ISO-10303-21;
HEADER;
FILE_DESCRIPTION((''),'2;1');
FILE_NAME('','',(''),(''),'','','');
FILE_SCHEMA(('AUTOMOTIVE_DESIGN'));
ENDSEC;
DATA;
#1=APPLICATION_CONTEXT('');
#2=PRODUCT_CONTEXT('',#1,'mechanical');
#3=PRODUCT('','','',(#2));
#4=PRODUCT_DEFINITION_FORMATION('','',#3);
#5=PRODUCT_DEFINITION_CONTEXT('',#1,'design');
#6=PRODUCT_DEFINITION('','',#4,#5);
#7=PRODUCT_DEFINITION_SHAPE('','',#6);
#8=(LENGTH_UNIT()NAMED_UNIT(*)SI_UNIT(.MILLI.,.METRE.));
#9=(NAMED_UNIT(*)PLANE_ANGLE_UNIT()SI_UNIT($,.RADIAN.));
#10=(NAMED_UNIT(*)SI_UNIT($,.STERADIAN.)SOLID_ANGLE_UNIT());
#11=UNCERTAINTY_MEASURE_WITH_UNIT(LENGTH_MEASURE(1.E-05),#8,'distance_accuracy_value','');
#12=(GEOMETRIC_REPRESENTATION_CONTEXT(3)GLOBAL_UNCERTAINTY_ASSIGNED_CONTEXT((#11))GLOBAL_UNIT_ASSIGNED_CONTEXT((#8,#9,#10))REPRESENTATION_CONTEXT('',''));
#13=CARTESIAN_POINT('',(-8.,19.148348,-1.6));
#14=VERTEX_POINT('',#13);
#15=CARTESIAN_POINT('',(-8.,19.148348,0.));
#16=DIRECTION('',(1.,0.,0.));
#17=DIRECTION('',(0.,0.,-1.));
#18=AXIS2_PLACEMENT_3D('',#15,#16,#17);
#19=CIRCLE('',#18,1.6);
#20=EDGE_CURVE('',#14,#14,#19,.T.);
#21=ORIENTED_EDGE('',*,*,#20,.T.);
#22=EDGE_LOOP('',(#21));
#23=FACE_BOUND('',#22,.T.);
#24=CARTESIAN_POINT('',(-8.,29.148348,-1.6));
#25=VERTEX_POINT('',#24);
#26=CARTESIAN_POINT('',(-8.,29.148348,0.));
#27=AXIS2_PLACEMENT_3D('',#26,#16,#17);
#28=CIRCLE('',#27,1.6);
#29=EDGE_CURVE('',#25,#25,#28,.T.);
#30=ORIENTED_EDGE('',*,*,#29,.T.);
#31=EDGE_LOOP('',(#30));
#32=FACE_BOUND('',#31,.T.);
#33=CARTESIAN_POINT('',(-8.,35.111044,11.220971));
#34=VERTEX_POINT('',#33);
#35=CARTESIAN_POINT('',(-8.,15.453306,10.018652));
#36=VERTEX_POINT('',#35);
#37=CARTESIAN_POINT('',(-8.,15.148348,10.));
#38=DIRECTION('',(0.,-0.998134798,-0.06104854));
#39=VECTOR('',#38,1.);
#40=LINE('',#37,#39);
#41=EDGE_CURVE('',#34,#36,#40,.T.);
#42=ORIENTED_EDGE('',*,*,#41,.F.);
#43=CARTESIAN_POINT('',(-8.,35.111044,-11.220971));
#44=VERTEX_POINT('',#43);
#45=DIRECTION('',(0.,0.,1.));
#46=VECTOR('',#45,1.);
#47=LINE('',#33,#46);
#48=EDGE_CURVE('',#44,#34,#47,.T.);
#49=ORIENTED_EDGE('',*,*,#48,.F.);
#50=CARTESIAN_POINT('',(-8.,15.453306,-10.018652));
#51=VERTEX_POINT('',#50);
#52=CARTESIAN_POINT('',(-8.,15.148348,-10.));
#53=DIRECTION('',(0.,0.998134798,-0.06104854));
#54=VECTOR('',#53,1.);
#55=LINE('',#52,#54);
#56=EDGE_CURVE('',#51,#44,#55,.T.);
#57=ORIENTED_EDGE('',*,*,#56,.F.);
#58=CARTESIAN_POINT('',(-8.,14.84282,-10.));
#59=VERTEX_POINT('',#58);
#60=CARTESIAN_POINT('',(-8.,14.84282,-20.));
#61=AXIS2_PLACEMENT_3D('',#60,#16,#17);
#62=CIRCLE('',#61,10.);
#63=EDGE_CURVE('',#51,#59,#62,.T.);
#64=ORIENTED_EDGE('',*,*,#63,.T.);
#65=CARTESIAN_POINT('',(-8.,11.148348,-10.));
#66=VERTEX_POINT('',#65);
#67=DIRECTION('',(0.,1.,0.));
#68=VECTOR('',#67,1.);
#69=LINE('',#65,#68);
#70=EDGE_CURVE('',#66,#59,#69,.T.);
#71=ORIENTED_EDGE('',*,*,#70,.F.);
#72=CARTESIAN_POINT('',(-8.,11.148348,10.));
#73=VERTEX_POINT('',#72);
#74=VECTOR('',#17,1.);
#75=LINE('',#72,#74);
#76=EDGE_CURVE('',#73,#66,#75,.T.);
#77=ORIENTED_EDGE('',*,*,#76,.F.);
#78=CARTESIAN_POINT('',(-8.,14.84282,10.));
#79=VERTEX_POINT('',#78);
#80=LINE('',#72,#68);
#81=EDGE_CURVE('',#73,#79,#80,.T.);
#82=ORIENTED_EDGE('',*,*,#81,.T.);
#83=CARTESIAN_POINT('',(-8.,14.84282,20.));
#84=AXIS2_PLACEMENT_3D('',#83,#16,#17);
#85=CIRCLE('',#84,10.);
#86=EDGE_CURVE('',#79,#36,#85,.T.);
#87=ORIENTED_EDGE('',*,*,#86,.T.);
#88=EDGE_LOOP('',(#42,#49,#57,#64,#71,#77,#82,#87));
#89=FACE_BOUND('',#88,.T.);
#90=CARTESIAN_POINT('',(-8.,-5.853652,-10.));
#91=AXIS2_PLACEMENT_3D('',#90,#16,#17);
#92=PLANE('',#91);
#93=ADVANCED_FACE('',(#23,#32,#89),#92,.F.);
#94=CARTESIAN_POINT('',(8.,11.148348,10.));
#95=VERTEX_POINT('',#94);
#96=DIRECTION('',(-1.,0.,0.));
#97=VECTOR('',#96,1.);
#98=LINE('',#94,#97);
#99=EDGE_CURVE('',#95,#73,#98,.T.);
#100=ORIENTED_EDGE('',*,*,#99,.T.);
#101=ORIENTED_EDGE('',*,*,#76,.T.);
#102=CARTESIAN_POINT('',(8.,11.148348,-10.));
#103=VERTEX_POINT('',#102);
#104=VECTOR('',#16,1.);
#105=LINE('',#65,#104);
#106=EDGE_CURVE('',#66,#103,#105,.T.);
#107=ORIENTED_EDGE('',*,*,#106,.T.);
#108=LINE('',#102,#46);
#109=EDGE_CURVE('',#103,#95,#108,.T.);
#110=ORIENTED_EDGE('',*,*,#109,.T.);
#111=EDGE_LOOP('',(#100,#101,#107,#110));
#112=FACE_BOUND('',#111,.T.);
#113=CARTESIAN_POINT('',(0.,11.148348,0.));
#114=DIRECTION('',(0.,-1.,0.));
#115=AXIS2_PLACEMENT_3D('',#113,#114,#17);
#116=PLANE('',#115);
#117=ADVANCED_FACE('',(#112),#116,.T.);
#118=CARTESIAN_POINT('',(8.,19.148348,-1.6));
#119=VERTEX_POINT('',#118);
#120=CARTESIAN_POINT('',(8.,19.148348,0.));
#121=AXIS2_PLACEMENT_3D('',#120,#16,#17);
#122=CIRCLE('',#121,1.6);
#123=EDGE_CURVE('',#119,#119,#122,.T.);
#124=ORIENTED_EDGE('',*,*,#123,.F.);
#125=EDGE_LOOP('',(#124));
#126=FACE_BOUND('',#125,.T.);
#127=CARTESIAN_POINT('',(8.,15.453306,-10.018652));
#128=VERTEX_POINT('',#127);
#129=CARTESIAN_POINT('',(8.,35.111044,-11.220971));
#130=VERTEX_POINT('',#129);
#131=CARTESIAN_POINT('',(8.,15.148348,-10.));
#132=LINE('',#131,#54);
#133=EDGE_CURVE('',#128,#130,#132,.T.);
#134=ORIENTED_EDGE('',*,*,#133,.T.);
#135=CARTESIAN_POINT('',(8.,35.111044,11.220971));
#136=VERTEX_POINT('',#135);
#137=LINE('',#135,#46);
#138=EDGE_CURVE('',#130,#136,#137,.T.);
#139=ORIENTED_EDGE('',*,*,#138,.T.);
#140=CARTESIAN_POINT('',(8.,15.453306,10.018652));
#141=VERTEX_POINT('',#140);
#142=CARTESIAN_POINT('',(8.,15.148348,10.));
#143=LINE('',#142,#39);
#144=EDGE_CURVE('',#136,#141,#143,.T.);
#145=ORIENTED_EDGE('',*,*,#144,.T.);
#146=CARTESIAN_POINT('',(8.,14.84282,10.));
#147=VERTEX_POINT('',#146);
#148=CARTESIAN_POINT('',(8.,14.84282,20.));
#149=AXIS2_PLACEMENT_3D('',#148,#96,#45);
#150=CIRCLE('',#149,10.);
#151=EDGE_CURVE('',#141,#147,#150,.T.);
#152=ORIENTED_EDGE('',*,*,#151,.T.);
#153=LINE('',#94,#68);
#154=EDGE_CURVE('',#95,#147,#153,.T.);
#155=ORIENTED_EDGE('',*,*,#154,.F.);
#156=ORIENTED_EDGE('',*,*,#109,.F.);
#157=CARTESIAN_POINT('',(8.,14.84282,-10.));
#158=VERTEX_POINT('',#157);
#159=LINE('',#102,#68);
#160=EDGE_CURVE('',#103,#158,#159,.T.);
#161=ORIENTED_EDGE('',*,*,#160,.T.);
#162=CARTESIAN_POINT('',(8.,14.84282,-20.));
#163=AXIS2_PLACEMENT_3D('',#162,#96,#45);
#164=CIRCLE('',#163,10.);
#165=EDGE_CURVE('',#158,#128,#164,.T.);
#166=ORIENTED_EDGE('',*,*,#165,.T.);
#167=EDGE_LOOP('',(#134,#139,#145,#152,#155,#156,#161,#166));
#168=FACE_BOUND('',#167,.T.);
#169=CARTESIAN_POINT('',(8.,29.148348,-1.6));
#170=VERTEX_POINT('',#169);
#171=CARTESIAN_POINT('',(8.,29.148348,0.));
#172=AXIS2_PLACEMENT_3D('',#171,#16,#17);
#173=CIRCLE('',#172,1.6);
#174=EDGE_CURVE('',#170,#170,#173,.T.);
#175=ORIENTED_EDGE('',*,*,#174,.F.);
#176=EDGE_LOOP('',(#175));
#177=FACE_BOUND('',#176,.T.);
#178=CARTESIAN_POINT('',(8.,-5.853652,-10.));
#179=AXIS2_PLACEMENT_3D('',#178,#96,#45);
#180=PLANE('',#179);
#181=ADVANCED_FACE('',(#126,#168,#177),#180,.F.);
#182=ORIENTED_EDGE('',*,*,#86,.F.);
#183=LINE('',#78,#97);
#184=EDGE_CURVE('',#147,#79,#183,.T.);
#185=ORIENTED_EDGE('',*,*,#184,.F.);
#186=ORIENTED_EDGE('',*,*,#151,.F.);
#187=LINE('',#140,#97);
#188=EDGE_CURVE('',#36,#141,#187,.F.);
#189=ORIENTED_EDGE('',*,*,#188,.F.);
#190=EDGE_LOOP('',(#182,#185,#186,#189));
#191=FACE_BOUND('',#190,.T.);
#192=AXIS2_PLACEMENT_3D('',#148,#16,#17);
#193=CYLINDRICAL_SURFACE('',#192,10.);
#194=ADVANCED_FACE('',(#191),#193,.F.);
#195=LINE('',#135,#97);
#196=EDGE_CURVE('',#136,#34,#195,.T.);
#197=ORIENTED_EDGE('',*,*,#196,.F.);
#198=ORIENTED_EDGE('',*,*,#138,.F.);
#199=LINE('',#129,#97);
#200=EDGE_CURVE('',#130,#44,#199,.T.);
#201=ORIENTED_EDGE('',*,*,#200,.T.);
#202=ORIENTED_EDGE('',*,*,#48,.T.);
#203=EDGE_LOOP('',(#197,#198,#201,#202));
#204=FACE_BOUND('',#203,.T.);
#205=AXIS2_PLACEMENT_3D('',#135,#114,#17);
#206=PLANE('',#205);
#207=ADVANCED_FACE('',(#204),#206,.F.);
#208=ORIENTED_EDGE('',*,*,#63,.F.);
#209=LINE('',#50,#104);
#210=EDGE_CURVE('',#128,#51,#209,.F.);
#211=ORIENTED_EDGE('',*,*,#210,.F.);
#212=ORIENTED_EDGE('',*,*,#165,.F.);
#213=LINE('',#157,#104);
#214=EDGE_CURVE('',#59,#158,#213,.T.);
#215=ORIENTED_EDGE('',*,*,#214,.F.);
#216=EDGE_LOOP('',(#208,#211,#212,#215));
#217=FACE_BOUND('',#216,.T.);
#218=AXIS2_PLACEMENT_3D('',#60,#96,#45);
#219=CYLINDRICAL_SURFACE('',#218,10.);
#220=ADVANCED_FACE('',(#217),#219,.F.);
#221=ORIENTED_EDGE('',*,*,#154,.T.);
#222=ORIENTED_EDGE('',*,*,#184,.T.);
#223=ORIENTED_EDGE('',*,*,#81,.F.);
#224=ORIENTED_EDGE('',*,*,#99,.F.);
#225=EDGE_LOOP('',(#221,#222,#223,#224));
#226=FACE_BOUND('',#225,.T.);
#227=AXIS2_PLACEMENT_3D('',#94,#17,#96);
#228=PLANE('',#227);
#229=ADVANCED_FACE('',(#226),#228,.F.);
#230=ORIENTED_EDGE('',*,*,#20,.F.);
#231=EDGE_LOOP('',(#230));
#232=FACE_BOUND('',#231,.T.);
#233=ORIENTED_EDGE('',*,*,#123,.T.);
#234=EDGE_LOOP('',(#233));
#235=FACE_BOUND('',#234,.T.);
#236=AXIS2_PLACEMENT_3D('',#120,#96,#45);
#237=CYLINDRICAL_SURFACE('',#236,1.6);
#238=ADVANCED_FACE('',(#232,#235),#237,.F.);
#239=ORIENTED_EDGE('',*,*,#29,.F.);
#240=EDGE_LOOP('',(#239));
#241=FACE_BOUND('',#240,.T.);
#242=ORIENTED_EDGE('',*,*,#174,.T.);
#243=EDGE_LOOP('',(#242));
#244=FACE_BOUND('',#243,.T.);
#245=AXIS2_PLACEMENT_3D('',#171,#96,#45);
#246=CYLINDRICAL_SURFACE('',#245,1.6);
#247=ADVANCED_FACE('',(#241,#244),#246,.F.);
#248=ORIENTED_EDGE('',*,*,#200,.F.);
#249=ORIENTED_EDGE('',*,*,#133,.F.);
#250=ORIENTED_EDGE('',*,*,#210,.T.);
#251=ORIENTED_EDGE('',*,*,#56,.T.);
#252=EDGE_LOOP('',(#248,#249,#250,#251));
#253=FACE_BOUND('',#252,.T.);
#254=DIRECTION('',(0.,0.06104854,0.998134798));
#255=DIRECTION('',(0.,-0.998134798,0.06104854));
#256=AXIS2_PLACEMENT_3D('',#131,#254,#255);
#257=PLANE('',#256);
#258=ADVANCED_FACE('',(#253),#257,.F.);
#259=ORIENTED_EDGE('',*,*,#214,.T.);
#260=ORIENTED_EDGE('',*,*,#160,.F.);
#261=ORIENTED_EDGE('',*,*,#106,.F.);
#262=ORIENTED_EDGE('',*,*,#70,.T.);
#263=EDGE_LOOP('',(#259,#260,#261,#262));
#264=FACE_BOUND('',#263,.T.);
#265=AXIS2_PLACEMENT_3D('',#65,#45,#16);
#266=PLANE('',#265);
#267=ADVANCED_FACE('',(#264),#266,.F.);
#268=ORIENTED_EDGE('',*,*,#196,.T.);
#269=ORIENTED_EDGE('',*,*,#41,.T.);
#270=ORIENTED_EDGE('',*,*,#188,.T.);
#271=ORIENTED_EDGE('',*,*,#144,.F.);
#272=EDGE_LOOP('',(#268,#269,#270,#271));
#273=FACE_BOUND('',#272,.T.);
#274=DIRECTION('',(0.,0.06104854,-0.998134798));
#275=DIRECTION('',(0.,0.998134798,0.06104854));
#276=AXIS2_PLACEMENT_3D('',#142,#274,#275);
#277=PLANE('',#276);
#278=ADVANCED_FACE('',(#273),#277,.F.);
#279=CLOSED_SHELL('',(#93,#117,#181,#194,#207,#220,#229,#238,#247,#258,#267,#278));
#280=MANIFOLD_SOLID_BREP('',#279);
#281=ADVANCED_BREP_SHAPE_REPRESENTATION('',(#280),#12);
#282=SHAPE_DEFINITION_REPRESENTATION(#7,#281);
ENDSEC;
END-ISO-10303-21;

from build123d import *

# Parameters (mm, degrees)
EXTRUDE_1_REACH          = 32.84
EXTRUDE_1_END_RADIUS     = 17
SKETCH_4_W               = 16
SKETCH_4_H               = 20
SKETCH_7_R               = 1.6
EXTRUDE_2_DEPTH          = 8
FILLET_1_R               = 2
CUT_EXTRUDE_1_DEPTH      = 10
CUT_EXTRUDE_1_DEPTH_BACK = 28
SKETCH_9_W               = 16
SKETCH_9_H               = 20
EXTRUDE_3_DEPTH          = 4
FILLET_2_R               = 10


with BuildPart() as part:
    # 草图1 → 旋转1 (revolve)
    with BuildSketch(Plane.XY):
        with BuildLine():
            Line((0, 8.148347953), (0, 15.148347953))
            ThreePointArc((0, 15.148347953), (-9.649034823, 12.144637711), (-15.888316149, 4.194951128))
            ThreePointArc((-15.888316149, 4.194951128), (-15.414532258, 2.711018861), (-13.862245394, 2.841140494))
            ThreePointArc((-13.862245394, 2.841140494), (-8.835262424, 6.313648333), (-3, 8.124333536))
            Line((-3, 8.124333536), (-3, -5.851652047))
            Line((-3, -5.851652047), (0, -5.851652047))
            Line((0, -5.851652047), (0, 8.148347953))
        make_face()
    revolve(axis=Axis((0, 30.990444744, 0), (0, -1, 0)))

    # 凸台-拉伸1: up to this sphere (the profile starts outside it)
    extrude_1_end = Location((0, -1.851652047, 0)) * Sphere(EXTRUDE_1_END_RADIUS, mode=Mode.PRIVATE)
    # 草图4 → 凸台-拉伸1 (add, up to the surface)
    with BuildSketch(Plane(origin=(0, 15.148347953, 0), x_dir=(-1, 0, 0), z_dir=(0, -1, 0)), mode=Mode.PRIVATE) as extrude_1_sk1:
        Rectangle(SKETCH_4_W, SKETCH_4_H)
    extrude_1_tool1 = extrude(extrude_1_sk1.sketch, amount=EXTRUDE_1_REACH, mode=Mode.PRIVATE) - extrude_1_end
    add(extrude_1_tool1.solids().sort_by_distance((0, 15.148348, 0))[0])

    # 草图7 → 凸台-拉伸2 (add, symmetric)
    with BuildSketch(Plane(origin=(0, 0, 0), x_dir=(0, 0, -1), z_dir=(1, 0, 0))):
        Polygon((-10, 15.148347953), (-11.220970791, 35.111043921), (11.220970791, 35.111043921), (10, 15.148347953), align=None)
        with Locations((0, 29.148347953)):
            Circle(SKETCH_7_R, mode=Mode.SUBTRACT)
        with Locations((0, 19.148347953)):
            Circle(SKETCH_7_R, mode=Mode.SUBTRACT)
    extrude(amount=EXTRUDE_2_DEPTH, both=True)

    # 圆角1
    fillet_1_edges = [part.edges().sort_by_distance(p)[0] for p in [
        (3, 8.124333536, 0),
    ]]
    fillet(fillet_1_edges, radius=FILLET_1_R)

    # 草图8 → 切除-拉伸1 (cut, two sides: drawn at the far end of the back side and taken through both)
    with BuildSketch(Plane(origin=(8, 0, 0), x_dir=(0, 0, -1), z_dir=(1, 0, 0)).offset(-CUT_EXTRUDE_1_DEPTH_BACK)):
        Polygon((-10, 15.148347953), (10, 15.148347953), (22.074384404, 15.148347953), (22.074384404, -11.334225307), (-23.122772671, -11.334225307), (-23.122772671, 15.148347953), align=None)
    extrude(amount=CUT_EXTRUDE_1_DEPTH + CUT_EXTRUDE_1_DEPTH_BACK, mode=Mode.SUBTRACT)

    # 草图9 → 凸台-拉伸3 (add)
    with BuildSketch(Plane.XZ.offset(-15.148347953)):
        Rectangle(SKETCH_9_W, SKETCH_9_H)
    extrude(amount=EXTRUDE_3_DEPTH)

    # 圆角2
    # the kernel refuses this fillet: 10 mm, written as the material it adds along each edge
    with BuildSketch(Plane(origin=(8, 15.148347953, 10), x_dir=(0, 0.9981347984218685, 0.061048539534831796), z_dir=(-1, 0, 0)), Plane(origin=(-8, 15.148347953, -10), x_dir=(0, 0.9981347984218659, -0.06104853953487234), z_dir=(1, 0, 0))) as fillet_2_piece_1:
        with BuildLine():
            CenterArc((FILLET_2_R * 0.0305527632986, -FILLET_2_R), FILLET_2_R, 90, 3.5)
            Line((-FILLET_2_R * 0.0304957762363, -FILLET_2_R * 0.00186520157813), (0, 0))
            Line((0, 0), (FILLET_2_R * 0.0305527632986, 0))
        make_face()
    extrude(amount=16)


solid = part.part
